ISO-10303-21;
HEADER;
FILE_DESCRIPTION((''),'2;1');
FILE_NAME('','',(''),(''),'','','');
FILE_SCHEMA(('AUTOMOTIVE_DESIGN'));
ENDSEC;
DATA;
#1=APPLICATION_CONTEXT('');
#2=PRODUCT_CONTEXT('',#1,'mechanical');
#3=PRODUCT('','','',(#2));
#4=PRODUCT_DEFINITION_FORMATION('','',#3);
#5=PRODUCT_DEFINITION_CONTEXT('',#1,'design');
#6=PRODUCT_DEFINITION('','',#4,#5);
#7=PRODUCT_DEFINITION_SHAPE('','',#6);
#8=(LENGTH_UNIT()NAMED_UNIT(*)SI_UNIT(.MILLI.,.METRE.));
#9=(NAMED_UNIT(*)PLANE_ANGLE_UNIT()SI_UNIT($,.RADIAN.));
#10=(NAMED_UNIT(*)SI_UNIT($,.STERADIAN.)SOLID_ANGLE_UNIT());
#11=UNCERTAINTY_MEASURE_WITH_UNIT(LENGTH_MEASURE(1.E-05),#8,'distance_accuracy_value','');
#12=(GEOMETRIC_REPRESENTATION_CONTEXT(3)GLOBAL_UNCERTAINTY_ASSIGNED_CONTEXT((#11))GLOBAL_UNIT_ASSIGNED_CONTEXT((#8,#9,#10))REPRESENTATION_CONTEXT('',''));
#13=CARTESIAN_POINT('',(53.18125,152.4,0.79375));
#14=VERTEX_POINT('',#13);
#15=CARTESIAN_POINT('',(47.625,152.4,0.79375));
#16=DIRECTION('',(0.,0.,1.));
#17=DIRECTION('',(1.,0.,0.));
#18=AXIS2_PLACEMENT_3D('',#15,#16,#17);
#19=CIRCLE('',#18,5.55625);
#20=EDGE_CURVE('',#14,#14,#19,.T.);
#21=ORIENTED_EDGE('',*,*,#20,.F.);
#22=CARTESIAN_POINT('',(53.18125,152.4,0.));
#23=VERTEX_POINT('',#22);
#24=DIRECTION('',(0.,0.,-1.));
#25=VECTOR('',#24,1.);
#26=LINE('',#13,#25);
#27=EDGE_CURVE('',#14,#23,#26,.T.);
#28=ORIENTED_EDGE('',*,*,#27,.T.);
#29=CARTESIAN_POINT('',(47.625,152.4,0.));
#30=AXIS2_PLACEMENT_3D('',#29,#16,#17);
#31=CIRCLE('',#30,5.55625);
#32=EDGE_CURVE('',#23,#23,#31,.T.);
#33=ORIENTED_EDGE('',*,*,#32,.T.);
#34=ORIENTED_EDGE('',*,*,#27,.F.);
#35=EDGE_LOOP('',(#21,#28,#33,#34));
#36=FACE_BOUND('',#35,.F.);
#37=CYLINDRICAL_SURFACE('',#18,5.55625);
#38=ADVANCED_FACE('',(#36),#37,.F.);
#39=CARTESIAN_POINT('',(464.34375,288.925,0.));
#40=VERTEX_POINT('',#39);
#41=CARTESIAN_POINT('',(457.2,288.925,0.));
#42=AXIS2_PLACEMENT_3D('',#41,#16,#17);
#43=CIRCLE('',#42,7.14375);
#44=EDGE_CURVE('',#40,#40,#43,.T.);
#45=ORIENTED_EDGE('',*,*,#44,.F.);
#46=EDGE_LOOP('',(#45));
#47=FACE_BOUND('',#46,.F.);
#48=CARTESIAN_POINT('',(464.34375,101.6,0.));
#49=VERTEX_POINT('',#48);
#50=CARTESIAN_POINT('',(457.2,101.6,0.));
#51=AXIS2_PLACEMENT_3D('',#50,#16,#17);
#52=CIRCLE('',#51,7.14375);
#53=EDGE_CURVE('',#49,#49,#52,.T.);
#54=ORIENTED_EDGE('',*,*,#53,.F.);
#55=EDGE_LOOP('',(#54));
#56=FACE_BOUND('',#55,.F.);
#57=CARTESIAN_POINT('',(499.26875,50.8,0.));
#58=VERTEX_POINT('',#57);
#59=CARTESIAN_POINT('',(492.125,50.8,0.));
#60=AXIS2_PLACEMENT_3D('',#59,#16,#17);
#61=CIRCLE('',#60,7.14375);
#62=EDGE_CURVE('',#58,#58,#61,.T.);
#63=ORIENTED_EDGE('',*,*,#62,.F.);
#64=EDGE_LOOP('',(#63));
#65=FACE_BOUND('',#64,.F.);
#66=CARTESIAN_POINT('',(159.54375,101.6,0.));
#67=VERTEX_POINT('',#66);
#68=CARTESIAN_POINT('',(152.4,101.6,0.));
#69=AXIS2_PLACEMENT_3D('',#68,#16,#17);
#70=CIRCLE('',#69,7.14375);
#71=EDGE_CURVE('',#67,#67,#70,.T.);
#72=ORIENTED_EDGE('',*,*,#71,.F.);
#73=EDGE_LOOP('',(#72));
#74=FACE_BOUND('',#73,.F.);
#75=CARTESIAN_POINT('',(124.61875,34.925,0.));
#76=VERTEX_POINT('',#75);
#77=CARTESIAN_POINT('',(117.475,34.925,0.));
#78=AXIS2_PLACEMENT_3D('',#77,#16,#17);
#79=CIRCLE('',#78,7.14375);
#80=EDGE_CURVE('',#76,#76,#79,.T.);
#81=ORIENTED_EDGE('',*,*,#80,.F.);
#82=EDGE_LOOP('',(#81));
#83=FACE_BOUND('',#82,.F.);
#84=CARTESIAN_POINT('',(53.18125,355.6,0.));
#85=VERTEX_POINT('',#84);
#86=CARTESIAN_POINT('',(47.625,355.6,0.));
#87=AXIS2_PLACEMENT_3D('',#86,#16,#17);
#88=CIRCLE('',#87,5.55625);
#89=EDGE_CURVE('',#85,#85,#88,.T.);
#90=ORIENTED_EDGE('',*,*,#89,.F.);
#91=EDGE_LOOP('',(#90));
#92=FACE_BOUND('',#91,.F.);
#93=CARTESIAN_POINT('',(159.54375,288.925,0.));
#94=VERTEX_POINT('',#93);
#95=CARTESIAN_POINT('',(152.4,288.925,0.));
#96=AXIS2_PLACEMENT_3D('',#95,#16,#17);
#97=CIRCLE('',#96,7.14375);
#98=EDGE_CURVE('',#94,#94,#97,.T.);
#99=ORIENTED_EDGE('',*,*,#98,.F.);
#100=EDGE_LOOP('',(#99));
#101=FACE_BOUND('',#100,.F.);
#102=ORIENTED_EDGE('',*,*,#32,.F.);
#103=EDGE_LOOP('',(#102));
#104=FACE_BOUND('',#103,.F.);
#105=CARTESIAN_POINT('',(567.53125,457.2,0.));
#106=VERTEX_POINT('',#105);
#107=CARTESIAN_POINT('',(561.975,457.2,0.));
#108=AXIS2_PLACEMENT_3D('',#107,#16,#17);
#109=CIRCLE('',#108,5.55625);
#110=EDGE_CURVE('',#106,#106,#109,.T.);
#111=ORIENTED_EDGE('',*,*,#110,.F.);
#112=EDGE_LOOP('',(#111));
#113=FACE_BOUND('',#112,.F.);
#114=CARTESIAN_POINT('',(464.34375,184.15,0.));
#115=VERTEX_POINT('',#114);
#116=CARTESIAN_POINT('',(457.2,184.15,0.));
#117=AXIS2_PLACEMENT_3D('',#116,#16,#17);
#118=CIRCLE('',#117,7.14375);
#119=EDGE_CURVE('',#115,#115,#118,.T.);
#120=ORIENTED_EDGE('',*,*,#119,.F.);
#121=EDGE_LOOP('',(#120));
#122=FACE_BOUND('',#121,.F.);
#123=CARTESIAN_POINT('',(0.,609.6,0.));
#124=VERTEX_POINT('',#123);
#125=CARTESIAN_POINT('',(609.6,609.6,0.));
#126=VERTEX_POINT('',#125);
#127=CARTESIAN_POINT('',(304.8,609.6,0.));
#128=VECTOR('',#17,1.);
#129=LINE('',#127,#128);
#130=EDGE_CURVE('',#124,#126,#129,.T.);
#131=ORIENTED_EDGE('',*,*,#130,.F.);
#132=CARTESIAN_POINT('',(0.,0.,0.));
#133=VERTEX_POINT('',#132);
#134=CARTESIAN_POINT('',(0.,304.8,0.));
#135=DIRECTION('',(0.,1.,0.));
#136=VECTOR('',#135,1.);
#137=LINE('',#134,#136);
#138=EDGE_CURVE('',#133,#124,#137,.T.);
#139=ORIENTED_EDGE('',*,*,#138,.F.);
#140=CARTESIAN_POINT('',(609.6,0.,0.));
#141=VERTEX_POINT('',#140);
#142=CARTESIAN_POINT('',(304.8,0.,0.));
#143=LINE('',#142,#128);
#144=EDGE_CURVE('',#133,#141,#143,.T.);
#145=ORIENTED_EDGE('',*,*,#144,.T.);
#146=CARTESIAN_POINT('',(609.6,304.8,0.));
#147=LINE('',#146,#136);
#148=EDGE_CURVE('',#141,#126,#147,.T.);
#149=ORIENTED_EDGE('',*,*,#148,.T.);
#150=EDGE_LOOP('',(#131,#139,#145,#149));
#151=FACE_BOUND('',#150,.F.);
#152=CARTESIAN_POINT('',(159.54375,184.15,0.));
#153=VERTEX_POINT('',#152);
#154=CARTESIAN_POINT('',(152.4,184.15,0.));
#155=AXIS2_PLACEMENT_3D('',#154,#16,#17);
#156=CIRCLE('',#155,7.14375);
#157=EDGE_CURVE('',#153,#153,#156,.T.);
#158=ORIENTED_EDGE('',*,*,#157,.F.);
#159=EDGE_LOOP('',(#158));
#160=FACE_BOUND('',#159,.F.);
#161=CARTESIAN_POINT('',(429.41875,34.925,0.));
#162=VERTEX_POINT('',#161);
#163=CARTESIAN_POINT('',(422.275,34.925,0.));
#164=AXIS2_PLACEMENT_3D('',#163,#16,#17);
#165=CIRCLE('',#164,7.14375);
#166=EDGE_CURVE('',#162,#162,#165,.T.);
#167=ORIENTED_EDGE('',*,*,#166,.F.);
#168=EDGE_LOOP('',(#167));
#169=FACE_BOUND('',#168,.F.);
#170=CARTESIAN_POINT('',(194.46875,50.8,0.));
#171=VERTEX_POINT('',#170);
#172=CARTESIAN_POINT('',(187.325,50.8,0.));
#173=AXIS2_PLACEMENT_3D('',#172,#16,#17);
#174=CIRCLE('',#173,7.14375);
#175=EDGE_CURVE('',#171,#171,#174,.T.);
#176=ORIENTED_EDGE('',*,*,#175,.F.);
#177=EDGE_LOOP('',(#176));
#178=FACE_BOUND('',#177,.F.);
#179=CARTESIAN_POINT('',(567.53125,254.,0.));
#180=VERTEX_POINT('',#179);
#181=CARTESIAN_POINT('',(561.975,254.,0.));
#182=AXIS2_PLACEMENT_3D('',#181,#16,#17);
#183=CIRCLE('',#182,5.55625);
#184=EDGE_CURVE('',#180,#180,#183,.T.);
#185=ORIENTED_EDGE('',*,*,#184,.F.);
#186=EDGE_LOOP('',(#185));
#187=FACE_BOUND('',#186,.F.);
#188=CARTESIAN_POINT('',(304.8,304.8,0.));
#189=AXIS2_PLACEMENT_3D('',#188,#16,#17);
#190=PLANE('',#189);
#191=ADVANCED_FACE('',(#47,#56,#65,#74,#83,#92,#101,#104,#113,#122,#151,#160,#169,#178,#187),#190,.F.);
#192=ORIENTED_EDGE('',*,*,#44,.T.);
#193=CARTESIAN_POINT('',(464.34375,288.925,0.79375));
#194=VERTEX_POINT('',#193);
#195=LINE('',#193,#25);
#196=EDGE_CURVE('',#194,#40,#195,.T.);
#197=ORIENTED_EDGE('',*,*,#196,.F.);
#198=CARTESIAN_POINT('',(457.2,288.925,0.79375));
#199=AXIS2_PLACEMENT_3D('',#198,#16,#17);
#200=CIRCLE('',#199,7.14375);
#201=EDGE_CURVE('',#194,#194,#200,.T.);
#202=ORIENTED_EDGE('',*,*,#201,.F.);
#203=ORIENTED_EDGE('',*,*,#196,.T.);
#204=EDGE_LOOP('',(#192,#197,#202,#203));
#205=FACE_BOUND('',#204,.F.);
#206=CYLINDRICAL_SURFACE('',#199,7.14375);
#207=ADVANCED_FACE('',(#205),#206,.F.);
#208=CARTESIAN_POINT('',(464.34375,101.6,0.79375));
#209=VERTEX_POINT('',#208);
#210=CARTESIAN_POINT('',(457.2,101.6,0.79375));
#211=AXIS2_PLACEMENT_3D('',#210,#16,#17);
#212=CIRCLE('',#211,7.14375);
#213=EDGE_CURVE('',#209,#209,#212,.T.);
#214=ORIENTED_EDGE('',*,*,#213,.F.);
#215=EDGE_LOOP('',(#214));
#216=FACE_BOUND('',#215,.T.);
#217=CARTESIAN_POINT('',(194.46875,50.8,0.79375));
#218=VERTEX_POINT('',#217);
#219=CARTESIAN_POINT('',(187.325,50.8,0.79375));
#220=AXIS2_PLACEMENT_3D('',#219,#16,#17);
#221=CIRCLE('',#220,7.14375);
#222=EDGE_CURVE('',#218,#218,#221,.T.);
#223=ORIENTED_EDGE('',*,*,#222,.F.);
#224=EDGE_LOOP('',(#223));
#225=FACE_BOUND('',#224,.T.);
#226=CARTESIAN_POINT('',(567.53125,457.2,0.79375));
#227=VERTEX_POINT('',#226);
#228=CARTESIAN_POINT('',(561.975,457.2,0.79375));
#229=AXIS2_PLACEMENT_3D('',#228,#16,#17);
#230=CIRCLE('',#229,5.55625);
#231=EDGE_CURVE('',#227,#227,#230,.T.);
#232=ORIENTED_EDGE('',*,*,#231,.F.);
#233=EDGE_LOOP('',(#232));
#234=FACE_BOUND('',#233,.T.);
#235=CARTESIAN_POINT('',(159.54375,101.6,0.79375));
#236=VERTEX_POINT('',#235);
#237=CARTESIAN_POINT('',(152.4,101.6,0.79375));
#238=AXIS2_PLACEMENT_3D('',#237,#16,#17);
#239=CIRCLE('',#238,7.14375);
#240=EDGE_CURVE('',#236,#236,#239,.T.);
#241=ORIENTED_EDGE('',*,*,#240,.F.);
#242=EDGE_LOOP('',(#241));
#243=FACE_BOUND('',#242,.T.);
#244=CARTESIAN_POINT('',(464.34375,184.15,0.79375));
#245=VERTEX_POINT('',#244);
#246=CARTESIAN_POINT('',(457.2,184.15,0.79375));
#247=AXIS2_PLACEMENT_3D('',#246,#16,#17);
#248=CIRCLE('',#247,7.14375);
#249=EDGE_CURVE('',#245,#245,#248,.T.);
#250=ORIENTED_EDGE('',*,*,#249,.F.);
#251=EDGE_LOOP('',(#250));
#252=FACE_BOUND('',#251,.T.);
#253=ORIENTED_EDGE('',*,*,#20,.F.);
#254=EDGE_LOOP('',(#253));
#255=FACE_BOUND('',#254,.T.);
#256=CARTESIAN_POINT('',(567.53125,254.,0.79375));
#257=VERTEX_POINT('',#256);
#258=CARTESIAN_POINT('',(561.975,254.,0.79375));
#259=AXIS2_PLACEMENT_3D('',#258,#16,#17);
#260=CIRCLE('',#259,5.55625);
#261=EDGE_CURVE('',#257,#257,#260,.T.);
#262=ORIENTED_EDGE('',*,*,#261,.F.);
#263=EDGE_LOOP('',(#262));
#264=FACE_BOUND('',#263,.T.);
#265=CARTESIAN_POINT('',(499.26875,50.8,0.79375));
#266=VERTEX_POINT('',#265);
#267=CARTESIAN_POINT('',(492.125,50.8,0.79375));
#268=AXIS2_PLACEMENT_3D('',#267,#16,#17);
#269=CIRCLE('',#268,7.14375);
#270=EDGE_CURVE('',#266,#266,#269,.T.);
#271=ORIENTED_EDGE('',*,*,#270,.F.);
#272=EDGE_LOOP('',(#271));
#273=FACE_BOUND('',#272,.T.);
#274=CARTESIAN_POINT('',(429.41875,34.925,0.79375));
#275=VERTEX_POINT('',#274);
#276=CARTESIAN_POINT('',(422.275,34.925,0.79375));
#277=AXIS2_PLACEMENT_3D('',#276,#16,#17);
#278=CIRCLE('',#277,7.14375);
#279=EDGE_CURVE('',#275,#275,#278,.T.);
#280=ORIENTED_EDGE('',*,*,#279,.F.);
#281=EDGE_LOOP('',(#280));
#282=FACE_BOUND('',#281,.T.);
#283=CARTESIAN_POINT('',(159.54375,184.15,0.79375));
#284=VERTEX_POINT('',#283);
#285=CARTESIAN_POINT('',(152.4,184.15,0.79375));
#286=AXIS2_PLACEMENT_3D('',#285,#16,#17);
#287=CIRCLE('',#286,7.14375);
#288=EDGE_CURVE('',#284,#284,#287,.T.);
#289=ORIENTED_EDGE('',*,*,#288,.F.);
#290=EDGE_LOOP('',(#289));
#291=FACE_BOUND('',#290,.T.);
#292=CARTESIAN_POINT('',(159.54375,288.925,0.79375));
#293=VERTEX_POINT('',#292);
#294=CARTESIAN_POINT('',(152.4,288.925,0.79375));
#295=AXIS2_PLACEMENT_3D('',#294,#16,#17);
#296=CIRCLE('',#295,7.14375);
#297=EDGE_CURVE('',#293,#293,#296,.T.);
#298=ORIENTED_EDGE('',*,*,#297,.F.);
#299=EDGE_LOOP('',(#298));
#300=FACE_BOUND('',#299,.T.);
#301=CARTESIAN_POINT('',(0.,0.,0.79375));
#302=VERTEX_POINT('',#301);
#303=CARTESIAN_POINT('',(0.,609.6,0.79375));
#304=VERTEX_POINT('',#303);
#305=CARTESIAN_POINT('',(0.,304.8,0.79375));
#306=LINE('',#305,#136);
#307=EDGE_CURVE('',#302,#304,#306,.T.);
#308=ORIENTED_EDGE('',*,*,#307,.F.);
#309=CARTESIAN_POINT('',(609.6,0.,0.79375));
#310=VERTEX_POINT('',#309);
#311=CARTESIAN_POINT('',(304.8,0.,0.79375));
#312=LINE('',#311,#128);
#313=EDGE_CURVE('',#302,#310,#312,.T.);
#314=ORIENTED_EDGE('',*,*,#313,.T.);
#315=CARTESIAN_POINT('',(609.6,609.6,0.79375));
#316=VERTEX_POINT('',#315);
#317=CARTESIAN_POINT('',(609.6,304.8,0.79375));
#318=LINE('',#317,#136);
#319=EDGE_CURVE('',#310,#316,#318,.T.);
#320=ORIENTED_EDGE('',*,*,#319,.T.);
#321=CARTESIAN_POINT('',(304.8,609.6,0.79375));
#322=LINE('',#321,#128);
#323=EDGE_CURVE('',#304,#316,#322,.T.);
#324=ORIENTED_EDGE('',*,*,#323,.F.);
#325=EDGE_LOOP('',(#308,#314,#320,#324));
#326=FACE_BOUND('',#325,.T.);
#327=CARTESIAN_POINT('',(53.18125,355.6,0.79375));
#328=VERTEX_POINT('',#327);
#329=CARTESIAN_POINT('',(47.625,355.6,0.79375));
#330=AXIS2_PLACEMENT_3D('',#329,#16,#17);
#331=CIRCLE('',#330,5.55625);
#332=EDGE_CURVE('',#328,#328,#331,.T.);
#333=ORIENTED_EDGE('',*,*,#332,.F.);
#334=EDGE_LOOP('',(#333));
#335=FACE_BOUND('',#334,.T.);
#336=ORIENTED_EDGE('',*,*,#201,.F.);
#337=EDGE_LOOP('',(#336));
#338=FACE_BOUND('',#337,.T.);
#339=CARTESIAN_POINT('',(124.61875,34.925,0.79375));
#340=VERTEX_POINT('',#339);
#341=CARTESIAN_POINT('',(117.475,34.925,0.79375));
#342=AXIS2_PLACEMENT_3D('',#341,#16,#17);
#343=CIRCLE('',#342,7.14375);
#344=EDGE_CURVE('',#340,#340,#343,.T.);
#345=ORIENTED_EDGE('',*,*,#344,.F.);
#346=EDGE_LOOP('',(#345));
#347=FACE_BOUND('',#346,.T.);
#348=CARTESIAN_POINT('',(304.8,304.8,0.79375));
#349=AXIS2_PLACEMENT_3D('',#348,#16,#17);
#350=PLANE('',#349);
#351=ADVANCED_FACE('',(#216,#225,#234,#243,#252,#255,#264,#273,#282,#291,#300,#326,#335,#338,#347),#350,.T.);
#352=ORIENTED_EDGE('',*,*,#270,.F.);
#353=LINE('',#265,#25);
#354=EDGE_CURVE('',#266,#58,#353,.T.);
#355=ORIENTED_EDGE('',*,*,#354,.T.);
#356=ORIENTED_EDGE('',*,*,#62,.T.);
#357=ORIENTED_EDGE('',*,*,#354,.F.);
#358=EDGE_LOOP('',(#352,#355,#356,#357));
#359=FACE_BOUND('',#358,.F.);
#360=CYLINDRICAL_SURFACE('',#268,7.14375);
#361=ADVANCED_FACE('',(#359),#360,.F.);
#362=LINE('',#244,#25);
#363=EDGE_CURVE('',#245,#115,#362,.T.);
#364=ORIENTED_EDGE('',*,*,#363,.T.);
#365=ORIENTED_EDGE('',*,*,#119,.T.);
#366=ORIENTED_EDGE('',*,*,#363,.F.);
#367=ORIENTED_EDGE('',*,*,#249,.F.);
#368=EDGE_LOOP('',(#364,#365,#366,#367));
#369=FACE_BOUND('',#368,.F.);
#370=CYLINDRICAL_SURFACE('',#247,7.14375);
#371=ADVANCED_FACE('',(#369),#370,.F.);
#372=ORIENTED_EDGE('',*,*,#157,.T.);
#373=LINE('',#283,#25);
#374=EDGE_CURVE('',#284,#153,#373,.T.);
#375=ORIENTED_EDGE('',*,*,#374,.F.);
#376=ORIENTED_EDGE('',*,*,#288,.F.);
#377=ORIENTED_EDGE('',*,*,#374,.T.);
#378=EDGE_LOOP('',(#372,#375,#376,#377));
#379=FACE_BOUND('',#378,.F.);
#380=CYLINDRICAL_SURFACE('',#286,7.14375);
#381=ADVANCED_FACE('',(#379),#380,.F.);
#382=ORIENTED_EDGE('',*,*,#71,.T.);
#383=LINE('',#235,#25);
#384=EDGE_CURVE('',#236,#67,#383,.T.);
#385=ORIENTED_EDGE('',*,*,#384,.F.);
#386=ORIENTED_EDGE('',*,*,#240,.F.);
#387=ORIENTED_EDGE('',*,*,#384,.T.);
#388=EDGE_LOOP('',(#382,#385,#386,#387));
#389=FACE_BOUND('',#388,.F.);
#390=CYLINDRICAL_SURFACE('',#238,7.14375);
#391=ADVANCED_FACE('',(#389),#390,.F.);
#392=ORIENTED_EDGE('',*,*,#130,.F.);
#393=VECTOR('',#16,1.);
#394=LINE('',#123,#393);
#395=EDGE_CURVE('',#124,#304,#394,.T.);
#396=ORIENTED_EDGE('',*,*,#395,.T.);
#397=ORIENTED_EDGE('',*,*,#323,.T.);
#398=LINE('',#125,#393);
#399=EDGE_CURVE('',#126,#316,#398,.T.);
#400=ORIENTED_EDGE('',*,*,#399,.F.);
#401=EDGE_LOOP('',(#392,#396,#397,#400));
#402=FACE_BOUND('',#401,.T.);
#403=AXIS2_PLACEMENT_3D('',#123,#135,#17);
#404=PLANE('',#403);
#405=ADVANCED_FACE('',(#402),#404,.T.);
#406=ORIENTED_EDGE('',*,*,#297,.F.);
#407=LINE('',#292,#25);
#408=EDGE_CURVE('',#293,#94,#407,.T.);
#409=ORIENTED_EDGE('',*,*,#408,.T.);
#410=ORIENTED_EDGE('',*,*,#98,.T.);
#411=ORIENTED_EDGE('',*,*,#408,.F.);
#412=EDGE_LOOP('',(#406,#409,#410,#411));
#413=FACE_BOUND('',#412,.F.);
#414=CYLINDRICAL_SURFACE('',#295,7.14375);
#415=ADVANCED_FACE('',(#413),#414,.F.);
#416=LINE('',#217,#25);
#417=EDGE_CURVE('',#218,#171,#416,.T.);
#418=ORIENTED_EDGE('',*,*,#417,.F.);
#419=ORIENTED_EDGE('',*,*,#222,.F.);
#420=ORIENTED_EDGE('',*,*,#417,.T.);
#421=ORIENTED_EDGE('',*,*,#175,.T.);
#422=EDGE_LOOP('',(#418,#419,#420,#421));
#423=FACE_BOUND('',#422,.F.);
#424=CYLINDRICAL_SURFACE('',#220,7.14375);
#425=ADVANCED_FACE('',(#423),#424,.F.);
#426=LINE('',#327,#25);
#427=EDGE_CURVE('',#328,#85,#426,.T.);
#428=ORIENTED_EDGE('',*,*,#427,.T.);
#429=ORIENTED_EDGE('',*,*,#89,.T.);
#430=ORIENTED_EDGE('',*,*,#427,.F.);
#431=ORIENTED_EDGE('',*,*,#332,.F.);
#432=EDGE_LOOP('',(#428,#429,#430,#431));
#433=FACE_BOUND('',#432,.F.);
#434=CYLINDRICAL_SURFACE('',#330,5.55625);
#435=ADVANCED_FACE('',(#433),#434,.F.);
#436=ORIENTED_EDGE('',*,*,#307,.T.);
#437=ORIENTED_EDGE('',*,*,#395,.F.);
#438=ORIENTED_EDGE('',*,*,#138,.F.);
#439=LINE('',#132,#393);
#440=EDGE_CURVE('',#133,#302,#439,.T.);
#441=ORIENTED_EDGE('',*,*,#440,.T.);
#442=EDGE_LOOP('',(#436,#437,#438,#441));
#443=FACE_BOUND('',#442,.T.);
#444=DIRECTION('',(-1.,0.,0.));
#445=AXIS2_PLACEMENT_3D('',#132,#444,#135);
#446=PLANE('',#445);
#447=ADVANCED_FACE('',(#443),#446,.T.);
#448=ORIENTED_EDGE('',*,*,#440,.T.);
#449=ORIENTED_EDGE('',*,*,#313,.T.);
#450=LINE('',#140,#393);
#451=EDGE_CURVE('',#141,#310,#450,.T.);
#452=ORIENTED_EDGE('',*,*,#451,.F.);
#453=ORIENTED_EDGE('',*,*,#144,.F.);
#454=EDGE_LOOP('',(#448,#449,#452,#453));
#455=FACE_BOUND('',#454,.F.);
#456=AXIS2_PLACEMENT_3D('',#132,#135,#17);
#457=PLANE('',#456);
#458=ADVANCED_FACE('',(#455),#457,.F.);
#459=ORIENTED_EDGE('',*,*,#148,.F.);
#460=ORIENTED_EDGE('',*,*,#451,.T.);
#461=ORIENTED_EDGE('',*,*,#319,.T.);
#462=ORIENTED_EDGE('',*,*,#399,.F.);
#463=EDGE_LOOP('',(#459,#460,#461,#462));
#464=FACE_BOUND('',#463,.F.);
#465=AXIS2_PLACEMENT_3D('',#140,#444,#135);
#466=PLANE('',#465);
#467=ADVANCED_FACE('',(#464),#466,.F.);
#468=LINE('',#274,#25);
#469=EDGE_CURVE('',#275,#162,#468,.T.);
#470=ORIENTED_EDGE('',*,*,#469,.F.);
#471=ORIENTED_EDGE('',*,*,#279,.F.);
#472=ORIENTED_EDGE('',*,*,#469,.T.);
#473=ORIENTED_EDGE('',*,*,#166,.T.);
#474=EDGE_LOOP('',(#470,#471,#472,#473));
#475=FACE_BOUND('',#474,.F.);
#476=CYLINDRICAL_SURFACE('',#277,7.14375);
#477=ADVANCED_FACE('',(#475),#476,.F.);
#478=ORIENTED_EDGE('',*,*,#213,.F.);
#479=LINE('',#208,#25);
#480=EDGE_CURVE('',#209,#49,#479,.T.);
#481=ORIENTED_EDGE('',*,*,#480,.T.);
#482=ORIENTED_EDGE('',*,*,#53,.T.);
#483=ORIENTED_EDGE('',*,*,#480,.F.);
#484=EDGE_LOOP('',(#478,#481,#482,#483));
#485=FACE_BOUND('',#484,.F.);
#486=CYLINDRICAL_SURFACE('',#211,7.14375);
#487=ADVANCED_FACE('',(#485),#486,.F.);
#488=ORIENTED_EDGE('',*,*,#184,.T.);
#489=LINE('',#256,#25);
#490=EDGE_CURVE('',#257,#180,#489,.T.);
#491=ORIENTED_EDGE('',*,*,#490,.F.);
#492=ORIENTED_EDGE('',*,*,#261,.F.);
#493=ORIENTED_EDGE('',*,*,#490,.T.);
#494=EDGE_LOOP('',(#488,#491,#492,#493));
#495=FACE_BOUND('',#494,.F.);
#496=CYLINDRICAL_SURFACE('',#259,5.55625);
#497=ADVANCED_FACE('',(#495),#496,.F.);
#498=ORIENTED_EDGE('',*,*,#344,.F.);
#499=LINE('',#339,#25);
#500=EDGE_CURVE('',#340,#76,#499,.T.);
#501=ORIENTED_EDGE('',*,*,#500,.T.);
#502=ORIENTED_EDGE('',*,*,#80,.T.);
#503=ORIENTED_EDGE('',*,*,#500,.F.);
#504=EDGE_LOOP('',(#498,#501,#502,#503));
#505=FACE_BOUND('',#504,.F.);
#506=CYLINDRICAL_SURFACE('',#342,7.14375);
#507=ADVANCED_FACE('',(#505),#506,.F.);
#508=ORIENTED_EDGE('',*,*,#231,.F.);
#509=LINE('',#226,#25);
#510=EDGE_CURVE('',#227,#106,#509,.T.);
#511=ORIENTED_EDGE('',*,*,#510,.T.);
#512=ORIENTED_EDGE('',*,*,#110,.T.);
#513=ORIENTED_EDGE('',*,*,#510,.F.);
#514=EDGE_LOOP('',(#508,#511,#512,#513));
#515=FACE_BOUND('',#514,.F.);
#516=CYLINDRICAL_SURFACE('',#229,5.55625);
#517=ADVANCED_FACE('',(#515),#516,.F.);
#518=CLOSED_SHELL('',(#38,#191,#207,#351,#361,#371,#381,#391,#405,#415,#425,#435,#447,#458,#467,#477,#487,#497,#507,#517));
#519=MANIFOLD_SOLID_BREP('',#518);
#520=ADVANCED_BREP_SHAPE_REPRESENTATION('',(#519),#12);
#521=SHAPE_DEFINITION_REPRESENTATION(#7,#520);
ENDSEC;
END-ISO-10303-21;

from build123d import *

# Parameters (mm, degrees)
F0_W     = 609.6
F0_H     = 609.6
F1_DEPTH = 0.79375
F2_R     = 5.55625
F3_DEPTH = 25.4
F4_R     = 7.14375
F5_DEPTH = 25.4


# Not quite as in the source:
# - a feature names something its author has since deleted; it is built from what else it names


with BuildPart() as f1:
    # F0 (on Top) → F1 (new body)
    with BuildSketch(Plane.XY):
        with Locations((304.8, 304.8)):
            Rectangle(F0_W, F0_H)
    extrude(amount=F1_DEPTH)

    # F2 (on face) → F3 (cut)
    with BuildSketch(Plane.XY.offset(0.79375)):
        with Locations((47.625, 152.4)):
            Circle(F2_R)
        with Locations((47.625, 355.6)):
            Circle(F2_R)
        with Locations((561.975, 254)):
            Circle(F2_R)
        with Locations((561.975, 457.2)):
            Circle(F2_R)
    extrude(amount=-F3_DEPTH, mode=Mode.SUBTRACT)

    # F4 (on face) → F5 (cut)
    with BuildSketch(Plane.XY.offset(0.79375)):
        with Locations((187.325, 50.8)):
            Circle(F4_R)
        with Locations((117.475, 34.925)):
            Circle(F4_R)
        with Locations((152.4, 101.6)):
            Circle(F4_R)
        with Locations((152.4, 184.15)):
            Circle(F4_R)
        with Locations((152.4, 288.925)):
            Circle(F4_R)
        with Locations((422.275, 34.925)):
            Circle(F4_R)
        with Locations((492.125, 50.8)):
            Circle(F4_R)
        with Locations((457.2, 101.6)):
            Circle(F4_R)
        with Locations((457.2, 184.15)):
            Circle(F4_R)
        with Locations((457.2, 288.925)):
            Circle(F4_R)
    extrude(amount=-F5_DEPTH, mode=Mode.SUBTRACT)


solid = f1.part
